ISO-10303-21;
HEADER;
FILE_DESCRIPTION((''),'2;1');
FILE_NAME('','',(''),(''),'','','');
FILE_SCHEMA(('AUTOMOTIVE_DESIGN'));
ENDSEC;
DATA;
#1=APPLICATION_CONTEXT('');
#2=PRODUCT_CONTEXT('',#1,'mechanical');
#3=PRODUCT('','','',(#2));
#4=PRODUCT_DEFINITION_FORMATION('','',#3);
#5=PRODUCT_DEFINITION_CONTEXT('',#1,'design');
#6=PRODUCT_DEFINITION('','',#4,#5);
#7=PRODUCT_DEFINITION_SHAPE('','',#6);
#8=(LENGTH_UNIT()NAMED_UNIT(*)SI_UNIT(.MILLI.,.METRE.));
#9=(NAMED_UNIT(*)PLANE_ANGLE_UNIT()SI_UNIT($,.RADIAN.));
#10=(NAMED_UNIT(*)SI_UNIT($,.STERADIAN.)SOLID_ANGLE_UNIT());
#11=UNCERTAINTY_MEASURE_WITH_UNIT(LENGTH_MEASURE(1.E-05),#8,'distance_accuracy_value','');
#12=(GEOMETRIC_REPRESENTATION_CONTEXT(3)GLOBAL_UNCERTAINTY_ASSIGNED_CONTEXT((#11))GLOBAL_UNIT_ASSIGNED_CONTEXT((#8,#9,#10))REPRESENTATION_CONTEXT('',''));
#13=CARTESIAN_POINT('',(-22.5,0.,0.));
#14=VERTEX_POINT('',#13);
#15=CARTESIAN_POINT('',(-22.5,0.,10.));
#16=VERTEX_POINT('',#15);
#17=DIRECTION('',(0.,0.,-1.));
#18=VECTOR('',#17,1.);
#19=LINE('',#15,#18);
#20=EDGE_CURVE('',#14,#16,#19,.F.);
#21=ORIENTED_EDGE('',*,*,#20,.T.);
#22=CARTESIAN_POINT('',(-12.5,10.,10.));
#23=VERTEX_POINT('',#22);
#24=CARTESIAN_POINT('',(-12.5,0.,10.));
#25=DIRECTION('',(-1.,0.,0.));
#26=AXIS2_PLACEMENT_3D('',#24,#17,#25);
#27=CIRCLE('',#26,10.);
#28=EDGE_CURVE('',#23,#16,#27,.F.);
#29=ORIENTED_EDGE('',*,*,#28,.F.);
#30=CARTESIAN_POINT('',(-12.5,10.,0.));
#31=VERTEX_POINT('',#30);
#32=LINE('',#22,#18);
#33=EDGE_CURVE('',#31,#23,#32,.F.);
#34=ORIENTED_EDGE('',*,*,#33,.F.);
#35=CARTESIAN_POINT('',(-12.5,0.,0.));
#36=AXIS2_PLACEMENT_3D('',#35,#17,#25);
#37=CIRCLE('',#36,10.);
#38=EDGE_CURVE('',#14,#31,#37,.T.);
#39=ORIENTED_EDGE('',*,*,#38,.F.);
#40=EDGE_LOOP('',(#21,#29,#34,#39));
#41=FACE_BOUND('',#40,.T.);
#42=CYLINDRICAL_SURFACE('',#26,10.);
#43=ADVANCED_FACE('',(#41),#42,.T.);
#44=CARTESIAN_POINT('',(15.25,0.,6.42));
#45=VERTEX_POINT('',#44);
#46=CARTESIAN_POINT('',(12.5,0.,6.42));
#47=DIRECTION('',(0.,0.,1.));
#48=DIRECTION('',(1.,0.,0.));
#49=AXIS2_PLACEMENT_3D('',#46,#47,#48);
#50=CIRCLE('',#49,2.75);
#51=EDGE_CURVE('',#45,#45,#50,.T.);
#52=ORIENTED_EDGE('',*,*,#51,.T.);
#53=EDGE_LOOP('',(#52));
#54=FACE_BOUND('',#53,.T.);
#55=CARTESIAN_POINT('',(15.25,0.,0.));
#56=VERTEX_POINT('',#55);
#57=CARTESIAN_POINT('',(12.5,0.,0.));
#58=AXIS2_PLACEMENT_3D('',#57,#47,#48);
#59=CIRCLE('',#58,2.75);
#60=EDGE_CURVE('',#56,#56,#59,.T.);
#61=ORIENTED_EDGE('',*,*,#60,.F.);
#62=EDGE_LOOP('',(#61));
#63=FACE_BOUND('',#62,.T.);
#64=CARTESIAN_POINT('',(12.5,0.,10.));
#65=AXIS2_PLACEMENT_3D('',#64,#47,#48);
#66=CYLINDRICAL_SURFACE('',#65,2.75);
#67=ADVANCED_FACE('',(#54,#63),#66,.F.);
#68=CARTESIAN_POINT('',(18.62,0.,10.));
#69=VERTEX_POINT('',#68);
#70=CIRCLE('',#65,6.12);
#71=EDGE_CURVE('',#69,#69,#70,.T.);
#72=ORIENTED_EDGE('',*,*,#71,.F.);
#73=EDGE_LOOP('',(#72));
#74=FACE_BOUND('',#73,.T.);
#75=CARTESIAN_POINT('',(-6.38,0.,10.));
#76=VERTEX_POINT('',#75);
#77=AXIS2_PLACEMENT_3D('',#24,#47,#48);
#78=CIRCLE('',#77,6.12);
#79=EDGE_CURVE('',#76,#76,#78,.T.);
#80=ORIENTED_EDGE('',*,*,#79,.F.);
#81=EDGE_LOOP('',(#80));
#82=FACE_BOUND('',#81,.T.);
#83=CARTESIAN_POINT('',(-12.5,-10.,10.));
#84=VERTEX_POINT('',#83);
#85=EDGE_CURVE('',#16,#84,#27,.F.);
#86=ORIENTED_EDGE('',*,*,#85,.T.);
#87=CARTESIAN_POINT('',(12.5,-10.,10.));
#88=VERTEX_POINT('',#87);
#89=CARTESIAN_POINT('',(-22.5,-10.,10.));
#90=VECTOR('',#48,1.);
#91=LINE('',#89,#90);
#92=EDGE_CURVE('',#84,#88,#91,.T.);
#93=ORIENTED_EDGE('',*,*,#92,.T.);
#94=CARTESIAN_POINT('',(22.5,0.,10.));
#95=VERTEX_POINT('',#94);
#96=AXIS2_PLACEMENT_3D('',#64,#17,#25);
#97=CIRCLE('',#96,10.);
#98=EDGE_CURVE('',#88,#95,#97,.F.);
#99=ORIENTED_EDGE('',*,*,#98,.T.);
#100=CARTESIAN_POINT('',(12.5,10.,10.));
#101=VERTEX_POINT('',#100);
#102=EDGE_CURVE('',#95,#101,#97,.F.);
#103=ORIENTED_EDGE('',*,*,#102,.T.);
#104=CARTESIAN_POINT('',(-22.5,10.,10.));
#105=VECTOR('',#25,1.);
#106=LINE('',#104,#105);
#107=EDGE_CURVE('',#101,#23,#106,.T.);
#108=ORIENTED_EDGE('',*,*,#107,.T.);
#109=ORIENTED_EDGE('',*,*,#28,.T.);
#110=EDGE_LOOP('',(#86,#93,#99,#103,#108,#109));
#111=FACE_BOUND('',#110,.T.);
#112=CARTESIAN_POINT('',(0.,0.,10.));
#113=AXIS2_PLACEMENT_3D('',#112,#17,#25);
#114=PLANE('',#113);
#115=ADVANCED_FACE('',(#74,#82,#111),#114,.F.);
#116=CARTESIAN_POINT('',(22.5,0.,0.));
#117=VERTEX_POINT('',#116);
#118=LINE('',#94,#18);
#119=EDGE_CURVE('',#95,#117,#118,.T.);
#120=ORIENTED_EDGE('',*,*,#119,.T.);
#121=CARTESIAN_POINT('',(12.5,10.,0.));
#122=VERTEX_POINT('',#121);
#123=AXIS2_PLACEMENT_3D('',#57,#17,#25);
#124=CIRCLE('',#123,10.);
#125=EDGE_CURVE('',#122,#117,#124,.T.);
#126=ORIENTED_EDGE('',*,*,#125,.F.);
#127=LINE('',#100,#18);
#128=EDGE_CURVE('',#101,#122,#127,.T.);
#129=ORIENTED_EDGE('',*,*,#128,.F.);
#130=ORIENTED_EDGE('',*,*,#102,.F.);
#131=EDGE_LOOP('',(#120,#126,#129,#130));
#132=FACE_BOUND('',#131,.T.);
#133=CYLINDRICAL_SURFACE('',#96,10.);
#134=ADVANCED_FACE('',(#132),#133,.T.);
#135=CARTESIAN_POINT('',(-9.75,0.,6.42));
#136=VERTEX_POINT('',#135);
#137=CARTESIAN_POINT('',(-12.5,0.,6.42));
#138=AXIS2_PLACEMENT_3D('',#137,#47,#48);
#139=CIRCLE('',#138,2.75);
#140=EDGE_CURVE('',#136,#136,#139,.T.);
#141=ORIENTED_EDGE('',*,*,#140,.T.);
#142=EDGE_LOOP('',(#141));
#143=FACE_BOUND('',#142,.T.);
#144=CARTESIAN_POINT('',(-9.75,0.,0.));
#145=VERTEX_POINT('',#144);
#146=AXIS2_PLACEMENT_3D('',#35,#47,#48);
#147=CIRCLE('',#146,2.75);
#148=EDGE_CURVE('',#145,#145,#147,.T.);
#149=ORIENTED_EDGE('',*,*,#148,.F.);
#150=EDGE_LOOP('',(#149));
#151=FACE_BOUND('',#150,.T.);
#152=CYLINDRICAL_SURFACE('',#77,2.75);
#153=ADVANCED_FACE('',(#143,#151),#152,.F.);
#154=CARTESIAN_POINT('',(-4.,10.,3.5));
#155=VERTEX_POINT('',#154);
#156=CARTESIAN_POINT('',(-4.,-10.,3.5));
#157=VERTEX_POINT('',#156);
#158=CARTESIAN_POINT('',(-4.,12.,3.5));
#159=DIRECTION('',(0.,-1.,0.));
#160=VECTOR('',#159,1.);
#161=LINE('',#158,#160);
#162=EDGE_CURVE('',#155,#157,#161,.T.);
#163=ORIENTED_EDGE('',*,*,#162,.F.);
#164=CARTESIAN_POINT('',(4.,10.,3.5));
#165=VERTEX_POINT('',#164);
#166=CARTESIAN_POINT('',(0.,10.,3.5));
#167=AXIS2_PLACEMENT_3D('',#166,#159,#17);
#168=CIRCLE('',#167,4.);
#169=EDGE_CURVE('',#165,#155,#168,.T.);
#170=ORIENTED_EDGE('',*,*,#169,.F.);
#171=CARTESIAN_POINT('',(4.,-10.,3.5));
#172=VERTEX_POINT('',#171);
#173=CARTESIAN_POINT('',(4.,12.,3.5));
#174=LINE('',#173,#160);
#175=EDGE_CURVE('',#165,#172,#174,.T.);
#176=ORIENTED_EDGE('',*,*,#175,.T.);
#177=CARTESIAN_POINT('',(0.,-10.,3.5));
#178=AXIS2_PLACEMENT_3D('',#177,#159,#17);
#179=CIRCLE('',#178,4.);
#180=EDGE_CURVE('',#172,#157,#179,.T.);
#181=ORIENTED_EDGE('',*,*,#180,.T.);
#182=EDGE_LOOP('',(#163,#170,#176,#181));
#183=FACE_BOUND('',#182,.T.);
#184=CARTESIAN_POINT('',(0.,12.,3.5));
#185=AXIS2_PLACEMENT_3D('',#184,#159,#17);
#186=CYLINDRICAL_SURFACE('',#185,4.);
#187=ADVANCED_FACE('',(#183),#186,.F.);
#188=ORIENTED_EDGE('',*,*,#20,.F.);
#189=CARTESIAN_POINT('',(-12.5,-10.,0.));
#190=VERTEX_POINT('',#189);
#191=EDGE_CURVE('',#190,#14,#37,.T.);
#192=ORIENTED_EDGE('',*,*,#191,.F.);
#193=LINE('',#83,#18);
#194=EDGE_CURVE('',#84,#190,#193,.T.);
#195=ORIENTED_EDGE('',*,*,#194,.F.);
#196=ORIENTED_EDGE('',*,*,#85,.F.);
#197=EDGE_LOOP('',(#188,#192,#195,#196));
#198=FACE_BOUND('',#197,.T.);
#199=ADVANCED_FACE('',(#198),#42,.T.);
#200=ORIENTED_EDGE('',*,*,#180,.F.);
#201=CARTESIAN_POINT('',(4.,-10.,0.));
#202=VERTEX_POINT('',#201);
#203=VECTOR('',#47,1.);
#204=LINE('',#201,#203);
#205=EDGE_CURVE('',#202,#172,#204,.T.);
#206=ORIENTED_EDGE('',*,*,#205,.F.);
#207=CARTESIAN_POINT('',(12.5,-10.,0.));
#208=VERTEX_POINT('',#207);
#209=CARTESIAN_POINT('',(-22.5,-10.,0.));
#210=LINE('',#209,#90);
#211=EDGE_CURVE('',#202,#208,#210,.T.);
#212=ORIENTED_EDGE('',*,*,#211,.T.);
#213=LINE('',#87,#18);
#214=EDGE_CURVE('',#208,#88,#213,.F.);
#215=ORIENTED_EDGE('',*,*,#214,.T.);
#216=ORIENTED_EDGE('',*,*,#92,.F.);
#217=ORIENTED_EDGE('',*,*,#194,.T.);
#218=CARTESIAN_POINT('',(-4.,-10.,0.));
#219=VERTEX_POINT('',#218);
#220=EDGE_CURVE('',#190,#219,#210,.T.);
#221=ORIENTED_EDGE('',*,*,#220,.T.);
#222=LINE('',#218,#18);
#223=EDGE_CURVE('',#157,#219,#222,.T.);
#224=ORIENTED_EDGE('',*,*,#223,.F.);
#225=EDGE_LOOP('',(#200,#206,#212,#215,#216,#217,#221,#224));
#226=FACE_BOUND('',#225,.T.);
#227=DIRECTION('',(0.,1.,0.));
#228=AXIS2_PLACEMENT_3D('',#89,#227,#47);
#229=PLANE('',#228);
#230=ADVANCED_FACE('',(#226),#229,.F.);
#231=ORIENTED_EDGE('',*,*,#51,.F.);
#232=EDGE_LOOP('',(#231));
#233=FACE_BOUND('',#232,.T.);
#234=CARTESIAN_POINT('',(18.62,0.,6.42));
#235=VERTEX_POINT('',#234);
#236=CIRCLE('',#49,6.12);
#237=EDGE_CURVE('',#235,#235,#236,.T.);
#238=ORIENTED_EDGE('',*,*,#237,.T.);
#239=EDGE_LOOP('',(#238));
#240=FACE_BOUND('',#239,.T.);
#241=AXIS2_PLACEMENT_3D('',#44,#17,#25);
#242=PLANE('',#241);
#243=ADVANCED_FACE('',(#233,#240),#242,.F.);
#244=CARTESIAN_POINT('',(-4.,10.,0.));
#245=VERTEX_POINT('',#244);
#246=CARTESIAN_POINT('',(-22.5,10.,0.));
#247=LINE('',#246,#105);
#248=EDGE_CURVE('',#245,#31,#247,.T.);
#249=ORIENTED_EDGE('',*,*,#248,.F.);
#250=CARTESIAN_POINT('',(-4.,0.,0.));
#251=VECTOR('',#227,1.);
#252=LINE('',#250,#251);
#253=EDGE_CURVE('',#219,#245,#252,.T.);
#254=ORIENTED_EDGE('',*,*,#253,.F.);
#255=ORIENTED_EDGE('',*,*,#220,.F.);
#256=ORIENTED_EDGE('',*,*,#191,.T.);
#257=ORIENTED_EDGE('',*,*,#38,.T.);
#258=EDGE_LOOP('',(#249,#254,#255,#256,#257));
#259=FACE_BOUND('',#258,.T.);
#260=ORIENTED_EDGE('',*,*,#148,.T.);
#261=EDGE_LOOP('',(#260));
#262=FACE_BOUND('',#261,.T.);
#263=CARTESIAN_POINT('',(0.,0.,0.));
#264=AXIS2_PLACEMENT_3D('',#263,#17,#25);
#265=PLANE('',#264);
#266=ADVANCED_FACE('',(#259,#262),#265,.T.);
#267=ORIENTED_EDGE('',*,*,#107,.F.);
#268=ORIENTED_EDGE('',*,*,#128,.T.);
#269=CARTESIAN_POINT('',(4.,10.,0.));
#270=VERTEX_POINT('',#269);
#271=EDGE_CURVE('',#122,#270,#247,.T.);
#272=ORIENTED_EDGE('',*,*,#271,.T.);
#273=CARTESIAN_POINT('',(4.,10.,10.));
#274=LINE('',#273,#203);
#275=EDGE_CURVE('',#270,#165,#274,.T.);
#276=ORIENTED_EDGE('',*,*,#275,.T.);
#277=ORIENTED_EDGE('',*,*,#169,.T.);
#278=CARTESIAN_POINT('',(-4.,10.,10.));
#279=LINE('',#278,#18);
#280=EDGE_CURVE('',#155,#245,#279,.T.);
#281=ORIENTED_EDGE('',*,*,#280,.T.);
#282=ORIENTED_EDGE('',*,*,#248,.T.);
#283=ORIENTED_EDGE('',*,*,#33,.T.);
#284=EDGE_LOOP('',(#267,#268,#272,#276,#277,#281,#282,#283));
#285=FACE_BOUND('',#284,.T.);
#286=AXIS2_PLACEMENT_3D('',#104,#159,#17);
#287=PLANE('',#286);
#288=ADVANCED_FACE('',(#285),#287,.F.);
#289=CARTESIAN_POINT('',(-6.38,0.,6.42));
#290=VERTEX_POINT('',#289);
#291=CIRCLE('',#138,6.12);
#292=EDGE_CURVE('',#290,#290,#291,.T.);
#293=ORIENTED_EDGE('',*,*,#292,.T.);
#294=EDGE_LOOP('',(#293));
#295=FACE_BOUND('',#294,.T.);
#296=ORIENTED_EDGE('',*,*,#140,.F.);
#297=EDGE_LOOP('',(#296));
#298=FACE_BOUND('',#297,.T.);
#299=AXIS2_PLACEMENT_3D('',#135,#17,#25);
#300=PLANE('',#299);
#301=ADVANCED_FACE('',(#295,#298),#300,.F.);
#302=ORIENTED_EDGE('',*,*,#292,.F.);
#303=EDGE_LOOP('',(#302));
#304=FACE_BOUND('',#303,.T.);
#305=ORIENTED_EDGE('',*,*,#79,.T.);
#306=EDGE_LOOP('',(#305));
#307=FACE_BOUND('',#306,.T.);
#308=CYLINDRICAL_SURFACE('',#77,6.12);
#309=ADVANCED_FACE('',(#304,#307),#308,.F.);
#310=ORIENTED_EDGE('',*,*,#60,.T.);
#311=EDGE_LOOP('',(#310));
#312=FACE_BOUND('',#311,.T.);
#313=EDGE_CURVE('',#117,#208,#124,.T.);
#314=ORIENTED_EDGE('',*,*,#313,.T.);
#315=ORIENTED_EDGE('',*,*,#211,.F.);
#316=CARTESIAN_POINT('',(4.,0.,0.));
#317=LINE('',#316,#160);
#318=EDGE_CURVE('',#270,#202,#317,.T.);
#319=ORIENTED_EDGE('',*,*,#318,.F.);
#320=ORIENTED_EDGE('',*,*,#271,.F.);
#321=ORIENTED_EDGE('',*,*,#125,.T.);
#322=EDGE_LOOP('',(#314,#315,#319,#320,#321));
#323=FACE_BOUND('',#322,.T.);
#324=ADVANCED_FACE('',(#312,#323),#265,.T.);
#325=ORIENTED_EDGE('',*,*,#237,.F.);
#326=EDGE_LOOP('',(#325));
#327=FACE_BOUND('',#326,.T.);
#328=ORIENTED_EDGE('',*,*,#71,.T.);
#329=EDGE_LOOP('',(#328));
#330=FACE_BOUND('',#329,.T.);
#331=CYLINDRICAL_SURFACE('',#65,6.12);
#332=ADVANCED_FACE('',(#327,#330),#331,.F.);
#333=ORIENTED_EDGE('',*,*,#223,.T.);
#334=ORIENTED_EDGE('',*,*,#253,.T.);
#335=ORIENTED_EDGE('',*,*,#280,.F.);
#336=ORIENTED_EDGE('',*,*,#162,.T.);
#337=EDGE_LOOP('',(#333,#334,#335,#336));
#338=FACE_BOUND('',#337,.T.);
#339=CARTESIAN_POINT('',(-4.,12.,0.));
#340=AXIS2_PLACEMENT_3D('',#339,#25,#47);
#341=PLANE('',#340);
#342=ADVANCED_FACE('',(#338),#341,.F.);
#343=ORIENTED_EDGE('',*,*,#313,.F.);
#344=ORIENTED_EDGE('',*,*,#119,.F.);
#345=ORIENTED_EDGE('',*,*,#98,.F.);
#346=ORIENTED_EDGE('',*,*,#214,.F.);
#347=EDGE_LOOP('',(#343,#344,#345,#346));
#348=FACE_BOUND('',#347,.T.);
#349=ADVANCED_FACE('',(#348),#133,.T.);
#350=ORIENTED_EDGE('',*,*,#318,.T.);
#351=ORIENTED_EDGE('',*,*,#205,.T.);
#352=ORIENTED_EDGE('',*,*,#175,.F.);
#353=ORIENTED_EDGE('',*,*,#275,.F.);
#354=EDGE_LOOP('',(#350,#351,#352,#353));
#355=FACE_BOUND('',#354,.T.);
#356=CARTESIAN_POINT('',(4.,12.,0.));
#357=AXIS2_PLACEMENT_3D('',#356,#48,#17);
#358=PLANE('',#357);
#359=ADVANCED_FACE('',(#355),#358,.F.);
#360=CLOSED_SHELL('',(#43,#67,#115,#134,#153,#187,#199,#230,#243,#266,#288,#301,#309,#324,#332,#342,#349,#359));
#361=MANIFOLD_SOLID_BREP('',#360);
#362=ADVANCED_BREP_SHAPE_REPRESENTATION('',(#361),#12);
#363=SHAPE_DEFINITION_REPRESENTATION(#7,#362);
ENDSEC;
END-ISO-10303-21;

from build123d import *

# Parameters (mm, degrees)
SKETCH2_W                               = 45
SKETCH2_H                               = 20
BOSS_EXTRUDE2_DEPTH                     = 10
FILLET1_R                               = 10
CUT_EXTRUDE1_DEPTH                      = 22
CBORE_FOR_M5_HEX_HEAD_BOLT1_D           = 5.5
CBORE_FOR_M5_HEX_HEAD_BOLT1_CBORE_D     = 12.24
CBORE_FOR_M5_HEX_HEAD_BOLT1_CBORE_DEPTH = 3.58


with BuildPart() as part:
    # Sketch2 → Boss-Extrude2 (new body)
    with BuildSketch(Plane.XY):
        Rectangle(SKETCH2_W, SKETCH2_H)
    extrude(amount=BOSS_EXTRUDE2_DEPTH)

    # Fillet1
    fillet1_edges = [part.edges().sort_by_distance(p)[0] for p in [
        (22.5, 10, 5),
        (22.5, -10, 5),
        (-22.5, 10, 5),
        (-22.5, -10, 5),
    ]]
    fillet(fillet1_edges, radius=FILLET1_R - 0.0001)  # a hair under: the kernel refuses the full size

    # Sketch3 → Cut-Extrude1 (cut)
    with BuildSketch(Plane.XZ.offset(10)):
        with BuildLine():
            Line((-4, 0), (-4, 3.5))
            ThreePointArc((-4, 3.5), (0, 7.5), (4, 3.5))
            Line((4, 3.5), (4, 0))
            ThreePointArc((4, 0), (0, -4), (-4, 0))
        make_face()
    extrude(amount=-CUT_EXTRUDE1_DEPTH, mode=Mode.SUBTRACT)

    # CBORE for M5 Hex Head Bolt1 (through all)
    with Locations(Plane.XY.offset(10)):
        with Locations((-12.5, 0), (12.5, 0)):
            CounterBoreHole(CBORE_FOR_M5_HEX_HEAD_BOLT1_D / 2, CBORE_FOR_M5_HEX_HEAD_BOLT1_CBORE_D / 2, CBORE_FOR_M5_HEX_HEAD_BOLT1_CBORE_DEPTH)


solid = part.part
